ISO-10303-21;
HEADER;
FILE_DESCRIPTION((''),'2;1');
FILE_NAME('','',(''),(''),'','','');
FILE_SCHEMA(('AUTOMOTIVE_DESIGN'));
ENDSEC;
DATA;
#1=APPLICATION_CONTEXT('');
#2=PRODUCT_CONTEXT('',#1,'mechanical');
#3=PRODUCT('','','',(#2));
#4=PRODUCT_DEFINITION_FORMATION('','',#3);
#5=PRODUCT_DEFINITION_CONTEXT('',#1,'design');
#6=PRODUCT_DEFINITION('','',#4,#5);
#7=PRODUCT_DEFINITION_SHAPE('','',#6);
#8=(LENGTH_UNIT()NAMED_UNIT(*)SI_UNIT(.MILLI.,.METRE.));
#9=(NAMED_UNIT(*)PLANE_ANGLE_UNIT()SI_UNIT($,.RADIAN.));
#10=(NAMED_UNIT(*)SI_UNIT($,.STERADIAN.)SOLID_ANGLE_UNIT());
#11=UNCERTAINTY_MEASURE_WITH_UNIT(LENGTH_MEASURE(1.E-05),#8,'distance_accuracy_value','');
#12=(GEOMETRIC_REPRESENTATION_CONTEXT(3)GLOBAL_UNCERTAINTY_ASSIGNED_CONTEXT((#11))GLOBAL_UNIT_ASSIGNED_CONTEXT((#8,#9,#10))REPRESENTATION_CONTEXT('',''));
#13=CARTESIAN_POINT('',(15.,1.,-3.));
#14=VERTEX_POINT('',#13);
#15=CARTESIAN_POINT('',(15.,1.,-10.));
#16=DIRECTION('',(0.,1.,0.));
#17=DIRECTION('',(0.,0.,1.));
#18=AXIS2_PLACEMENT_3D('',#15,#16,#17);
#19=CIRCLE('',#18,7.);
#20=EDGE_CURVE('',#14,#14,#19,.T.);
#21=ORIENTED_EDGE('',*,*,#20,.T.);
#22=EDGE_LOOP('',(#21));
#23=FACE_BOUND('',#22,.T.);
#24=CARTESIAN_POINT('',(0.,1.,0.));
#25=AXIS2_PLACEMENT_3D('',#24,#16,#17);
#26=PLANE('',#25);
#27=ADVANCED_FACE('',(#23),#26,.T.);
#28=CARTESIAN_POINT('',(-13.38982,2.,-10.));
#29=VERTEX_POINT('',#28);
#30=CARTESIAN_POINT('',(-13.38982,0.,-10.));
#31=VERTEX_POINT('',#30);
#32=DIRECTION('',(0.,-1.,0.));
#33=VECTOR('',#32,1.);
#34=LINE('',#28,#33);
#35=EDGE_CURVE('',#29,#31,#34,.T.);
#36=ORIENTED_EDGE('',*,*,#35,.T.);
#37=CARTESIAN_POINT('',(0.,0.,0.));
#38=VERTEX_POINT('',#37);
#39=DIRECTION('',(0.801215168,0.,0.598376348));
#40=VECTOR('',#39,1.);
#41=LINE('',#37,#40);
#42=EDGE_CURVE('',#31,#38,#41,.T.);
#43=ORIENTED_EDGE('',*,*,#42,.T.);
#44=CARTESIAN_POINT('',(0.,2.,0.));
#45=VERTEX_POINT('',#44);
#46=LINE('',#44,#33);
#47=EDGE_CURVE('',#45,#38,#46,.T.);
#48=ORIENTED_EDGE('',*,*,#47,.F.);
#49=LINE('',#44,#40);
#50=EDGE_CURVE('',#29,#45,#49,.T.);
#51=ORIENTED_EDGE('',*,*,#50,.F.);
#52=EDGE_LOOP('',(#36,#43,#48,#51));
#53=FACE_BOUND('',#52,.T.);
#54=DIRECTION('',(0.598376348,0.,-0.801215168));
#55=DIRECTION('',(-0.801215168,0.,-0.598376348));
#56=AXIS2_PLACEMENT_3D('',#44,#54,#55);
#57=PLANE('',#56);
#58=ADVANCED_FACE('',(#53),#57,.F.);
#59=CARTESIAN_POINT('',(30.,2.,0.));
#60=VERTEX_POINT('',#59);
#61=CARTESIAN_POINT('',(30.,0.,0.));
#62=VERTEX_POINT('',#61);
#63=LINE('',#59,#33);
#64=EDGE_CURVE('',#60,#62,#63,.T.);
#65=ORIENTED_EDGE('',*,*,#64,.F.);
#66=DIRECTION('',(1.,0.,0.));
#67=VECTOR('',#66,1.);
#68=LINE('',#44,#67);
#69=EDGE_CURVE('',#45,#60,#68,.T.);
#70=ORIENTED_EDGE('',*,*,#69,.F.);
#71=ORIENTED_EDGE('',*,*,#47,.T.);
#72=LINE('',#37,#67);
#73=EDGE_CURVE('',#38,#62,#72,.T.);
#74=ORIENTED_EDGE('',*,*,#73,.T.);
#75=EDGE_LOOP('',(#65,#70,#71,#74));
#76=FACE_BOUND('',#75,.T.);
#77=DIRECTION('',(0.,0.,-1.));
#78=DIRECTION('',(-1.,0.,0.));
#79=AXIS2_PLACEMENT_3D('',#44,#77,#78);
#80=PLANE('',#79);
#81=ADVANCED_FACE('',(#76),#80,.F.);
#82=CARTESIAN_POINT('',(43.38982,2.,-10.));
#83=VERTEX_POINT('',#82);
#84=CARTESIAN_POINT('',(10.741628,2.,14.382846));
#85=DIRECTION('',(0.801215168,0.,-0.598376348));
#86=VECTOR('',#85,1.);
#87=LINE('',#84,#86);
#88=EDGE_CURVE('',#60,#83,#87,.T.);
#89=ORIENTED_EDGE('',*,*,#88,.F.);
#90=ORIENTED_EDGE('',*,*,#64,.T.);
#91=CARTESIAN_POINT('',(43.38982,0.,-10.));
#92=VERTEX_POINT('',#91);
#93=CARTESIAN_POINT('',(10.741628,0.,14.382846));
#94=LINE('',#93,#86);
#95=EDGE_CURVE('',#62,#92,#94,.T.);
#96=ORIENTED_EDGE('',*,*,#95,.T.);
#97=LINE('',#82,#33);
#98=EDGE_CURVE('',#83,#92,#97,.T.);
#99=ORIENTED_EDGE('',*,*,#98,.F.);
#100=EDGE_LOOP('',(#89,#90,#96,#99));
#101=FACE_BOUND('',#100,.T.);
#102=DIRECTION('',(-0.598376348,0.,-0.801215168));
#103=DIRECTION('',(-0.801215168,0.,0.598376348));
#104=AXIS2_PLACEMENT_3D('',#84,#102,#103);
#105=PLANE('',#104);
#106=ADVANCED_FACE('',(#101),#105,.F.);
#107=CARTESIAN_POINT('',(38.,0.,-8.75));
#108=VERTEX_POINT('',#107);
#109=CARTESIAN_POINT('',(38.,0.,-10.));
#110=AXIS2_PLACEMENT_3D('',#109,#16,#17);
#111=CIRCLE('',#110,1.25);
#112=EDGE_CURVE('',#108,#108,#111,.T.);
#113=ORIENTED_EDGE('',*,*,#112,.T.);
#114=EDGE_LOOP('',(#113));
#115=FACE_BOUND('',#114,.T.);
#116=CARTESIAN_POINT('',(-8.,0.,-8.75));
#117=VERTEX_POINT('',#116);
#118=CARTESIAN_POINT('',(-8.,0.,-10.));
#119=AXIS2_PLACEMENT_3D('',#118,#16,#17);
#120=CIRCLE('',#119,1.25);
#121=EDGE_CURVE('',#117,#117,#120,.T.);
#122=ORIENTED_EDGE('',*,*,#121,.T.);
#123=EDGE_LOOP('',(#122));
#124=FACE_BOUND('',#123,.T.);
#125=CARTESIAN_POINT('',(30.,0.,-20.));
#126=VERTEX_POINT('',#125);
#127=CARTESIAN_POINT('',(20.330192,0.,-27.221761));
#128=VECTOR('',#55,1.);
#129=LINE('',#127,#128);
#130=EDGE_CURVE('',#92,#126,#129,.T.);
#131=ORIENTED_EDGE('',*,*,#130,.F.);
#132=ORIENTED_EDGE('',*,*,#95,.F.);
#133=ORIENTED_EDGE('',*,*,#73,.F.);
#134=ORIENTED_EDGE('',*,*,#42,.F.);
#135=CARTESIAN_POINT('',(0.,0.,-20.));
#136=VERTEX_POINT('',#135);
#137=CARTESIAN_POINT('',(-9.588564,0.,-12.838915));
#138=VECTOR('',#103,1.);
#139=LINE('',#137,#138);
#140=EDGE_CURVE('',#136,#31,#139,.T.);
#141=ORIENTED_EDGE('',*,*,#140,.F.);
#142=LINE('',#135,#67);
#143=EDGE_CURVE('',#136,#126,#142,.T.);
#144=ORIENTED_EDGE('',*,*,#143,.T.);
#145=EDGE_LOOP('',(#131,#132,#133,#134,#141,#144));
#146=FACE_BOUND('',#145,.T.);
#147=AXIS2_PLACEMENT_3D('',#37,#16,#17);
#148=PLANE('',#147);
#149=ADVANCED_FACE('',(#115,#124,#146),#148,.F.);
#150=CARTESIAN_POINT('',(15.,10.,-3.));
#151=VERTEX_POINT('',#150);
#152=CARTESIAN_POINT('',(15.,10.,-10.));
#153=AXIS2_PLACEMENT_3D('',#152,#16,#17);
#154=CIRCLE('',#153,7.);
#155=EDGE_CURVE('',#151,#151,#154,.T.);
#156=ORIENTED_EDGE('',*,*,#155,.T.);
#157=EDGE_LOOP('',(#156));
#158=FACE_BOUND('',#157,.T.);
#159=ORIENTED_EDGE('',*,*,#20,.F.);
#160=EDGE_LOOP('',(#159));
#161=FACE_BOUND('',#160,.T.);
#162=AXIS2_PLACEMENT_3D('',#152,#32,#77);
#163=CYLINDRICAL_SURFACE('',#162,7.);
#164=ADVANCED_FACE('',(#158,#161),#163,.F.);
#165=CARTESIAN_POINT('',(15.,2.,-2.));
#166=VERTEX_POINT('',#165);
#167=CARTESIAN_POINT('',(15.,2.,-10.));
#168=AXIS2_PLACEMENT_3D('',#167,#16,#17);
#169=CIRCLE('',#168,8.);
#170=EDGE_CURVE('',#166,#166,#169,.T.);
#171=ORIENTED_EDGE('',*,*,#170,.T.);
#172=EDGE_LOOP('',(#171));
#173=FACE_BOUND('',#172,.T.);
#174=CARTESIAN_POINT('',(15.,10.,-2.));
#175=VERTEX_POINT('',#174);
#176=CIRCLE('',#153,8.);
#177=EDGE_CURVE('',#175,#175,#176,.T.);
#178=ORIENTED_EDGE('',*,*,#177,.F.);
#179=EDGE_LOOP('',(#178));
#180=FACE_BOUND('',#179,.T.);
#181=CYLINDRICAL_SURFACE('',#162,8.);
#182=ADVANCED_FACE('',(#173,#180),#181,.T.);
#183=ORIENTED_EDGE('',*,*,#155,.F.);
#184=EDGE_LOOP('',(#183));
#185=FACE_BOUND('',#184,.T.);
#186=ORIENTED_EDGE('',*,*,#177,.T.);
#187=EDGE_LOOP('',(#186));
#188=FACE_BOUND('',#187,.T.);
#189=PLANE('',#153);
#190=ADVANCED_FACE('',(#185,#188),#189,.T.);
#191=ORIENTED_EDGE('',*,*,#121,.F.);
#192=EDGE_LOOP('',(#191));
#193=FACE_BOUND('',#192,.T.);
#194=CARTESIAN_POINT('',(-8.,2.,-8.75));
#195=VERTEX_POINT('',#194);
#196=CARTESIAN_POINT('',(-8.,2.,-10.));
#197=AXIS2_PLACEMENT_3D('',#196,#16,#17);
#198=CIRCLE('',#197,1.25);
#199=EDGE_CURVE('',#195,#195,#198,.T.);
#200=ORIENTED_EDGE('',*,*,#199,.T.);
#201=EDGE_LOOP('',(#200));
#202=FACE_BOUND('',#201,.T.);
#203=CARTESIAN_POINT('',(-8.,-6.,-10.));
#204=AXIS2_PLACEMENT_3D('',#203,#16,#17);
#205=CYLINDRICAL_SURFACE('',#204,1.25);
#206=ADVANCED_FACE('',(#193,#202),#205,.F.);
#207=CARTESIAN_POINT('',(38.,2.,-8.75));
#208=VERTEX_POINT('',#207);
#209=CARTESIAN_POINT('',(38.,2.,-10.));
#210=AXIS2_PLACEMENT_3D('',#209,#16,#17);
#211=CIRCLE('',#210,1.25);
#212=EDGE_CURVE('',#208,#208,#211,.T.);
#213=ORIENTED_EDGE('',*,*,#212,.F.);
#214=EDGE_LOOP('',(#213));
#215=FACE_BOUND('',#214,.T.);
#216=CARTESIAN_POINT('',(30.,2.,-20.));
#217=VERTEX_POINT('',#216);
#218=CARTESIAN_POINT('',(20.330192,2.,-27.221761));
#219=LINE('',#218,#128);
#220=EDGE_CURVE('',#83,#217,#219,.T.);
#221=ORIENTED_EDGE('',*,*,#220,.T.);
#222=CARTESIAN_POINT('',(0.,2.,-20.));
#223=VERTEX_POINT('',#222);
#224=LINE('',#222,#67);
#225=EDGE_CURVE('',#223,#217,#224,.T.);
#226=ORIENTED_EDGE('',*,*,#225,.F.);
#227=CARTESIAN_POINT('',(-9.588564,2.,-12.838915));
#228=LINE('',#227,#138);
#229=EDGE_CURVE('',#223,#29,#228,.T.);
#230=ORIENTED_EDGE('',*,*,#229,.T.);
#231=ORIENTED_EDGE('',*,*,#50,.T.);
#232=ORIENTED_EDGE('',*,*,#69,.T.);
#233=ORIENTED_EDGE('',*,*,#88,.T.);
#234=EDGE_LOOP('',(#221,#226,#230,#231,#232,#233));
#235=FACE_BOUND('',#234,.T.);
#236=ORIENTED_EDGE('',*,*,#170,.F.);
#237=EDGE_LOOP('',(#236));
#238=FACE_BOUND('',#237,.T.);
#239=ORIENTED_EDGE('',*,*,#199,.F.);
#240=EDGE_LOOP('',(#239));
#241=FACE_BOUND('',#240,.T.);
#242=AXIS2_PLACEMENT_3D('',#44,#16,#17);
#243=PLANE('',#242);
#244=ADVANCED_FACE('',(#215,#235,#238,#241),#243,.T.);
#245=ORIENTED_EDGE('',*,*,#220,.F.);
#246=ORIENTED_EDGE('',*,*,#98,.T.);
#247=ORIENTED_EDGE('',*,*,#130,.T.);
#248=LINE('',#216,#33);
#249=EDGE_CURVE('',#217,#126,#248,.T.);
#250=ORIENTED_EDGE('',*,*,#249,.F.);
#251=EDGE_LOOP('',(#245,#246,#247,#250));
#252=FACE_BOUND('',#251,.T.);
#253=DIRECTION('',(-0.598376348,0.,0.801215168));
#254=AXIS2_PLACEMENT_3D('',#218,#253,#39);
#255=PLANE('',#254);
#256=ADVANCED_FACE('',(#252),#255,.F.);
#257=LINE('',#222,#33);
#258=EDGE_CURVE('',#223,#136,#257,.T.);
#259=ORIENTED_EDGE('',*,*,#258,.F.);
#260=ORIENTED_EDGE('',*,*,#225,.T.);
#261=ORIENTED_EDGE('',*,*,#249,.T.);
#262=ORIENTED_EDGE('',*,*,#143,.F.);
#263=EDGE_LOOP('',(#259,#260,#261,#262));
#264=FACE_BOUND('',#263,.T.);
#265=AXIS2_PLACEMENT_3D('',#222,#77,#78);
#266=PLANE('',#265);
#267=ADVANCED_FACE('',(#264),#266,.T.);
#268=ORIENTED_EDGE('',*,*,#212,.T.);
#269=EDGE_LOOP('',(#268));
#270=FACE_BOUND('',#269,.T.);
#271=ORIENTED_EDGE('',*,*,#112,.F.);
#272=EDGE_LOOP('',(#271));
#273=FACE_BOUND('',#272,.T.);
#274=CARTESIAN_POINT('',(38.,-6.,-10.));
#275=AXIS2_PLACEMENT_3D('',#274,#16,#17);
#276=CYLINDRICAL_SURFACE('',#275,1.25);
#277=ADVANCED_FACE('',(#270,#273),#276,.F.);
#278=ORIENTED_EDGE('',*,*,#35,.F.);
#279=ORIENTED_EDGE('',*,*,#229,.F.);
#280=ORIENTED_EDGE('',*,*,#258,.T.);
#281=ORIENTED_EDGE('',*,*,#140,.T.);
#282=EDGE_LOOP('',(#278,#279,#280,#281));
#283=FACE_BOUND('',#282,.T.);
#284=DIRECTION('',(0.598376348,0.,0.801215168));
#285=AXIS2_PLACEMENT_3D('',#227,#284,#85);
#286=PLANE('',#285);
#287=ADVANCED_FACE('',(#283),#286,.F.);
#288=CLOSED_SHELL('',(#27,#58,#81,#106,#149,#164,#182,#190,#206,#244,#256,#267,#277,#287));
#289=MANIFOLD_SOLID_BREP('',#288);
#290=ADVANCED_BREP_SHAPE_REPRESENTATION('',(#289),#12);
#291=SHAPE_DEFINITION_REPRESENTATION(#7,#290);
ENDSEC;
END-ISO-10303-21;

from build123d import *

# Parameters (mm, degrees)
SKETCH1_W           = 30
SKETCH1_H           = 20
BOSS_EXTRUDE1_DEPTH = 2
SKETCH4_R           = 8
BOSS_EXTRUDE2_DEPTH = 8
SHELL1_START        = 1
SHELL1_OUTLINE_R    = 7
SHELL1_DEPTH        = 9
SKETCH5_R           = 1.25
CUT_EXTRUDE1_DEPTH  = 8
SKETCH6_R           = 1.25
CUT_EXTRUDE2_DEPTH  = 8


# Read off the part's stored shape, not the designer's step: Shell1
with BuildPart() as part:
    # Sketch1 → Boss-Extrude1 (new body)
    with BuildSketch(Plane(origin=(0, 0, 0), x_dir=(1, 0, 0), z_dir=(0, 1, 0))):
        Polygon((30, 0), (43.389820148, 10), (30, 20), align=None)
        Polygon((0, 20), (-13.389820148, 10), (0, 0), align=None)
        with Locations((15, 10)):
            Rectangle(SKETCH1_W, SKETCH1_H)
    extrude(amount=BOSS_EXTRUDE1_DEPTH)

    # Sketch4 → Boss-Extrude2 (add)
    with BuildSketch(Plane(origin=(0, 2, 0), x_dir=(1, 0, 0), z_dir=(0, 1, 0))):
        with Locations(Location((15, 10, 0), (0, 0, 270))):
            Circle(SKETCH4_R)
    extrude(amount=BOSS_EXTRUDE2_DEPTH)

    # Shell1 outline → Shell1 (cut)
    with BuildSketch(Plane(origin=(0, 0, 0), x_dir=(1, 0, 0), z_dir=(0, 1, 0)).offset(SHELL1_START)):
        with Locations((15, 10)):
            Circle(SHELL1_OUTLINE_R)
    extrude(amount=SHELL1_DEPTH, mode=Mode.SUBTRACT)

    # Sketch5 → Cut-Extrude1 (cut)
    with BuildSketch(Plane(origin=(0, 2, 0), x_dir=(1, 0, 0), z_dir=(0, 1, 0))):
        with Locations(Location((-8, 10, 0), (0, 0, 270))):
            Circle(SKETCH5_R)
    extrude(amount=-CUT_EXTRUDE1_DEPTH, mode=Mode.SUBTRACT)

    # Sketch6 → Cut-Extrude2 (cut)
    with BuildSketch(Plane(origin=(0, 2, 0), x_dir=(1, 0, 0), z_dir=(0, 1, 0))):
        with Locations(Location((38, 10, 0), (0, 0, 270))):
            Circle(SKETCH6_R)
    extrude(amount=-CUT_EXTRUDE2_DEPTH, mode=Mode.SUBTRACT)


solid = part.part
